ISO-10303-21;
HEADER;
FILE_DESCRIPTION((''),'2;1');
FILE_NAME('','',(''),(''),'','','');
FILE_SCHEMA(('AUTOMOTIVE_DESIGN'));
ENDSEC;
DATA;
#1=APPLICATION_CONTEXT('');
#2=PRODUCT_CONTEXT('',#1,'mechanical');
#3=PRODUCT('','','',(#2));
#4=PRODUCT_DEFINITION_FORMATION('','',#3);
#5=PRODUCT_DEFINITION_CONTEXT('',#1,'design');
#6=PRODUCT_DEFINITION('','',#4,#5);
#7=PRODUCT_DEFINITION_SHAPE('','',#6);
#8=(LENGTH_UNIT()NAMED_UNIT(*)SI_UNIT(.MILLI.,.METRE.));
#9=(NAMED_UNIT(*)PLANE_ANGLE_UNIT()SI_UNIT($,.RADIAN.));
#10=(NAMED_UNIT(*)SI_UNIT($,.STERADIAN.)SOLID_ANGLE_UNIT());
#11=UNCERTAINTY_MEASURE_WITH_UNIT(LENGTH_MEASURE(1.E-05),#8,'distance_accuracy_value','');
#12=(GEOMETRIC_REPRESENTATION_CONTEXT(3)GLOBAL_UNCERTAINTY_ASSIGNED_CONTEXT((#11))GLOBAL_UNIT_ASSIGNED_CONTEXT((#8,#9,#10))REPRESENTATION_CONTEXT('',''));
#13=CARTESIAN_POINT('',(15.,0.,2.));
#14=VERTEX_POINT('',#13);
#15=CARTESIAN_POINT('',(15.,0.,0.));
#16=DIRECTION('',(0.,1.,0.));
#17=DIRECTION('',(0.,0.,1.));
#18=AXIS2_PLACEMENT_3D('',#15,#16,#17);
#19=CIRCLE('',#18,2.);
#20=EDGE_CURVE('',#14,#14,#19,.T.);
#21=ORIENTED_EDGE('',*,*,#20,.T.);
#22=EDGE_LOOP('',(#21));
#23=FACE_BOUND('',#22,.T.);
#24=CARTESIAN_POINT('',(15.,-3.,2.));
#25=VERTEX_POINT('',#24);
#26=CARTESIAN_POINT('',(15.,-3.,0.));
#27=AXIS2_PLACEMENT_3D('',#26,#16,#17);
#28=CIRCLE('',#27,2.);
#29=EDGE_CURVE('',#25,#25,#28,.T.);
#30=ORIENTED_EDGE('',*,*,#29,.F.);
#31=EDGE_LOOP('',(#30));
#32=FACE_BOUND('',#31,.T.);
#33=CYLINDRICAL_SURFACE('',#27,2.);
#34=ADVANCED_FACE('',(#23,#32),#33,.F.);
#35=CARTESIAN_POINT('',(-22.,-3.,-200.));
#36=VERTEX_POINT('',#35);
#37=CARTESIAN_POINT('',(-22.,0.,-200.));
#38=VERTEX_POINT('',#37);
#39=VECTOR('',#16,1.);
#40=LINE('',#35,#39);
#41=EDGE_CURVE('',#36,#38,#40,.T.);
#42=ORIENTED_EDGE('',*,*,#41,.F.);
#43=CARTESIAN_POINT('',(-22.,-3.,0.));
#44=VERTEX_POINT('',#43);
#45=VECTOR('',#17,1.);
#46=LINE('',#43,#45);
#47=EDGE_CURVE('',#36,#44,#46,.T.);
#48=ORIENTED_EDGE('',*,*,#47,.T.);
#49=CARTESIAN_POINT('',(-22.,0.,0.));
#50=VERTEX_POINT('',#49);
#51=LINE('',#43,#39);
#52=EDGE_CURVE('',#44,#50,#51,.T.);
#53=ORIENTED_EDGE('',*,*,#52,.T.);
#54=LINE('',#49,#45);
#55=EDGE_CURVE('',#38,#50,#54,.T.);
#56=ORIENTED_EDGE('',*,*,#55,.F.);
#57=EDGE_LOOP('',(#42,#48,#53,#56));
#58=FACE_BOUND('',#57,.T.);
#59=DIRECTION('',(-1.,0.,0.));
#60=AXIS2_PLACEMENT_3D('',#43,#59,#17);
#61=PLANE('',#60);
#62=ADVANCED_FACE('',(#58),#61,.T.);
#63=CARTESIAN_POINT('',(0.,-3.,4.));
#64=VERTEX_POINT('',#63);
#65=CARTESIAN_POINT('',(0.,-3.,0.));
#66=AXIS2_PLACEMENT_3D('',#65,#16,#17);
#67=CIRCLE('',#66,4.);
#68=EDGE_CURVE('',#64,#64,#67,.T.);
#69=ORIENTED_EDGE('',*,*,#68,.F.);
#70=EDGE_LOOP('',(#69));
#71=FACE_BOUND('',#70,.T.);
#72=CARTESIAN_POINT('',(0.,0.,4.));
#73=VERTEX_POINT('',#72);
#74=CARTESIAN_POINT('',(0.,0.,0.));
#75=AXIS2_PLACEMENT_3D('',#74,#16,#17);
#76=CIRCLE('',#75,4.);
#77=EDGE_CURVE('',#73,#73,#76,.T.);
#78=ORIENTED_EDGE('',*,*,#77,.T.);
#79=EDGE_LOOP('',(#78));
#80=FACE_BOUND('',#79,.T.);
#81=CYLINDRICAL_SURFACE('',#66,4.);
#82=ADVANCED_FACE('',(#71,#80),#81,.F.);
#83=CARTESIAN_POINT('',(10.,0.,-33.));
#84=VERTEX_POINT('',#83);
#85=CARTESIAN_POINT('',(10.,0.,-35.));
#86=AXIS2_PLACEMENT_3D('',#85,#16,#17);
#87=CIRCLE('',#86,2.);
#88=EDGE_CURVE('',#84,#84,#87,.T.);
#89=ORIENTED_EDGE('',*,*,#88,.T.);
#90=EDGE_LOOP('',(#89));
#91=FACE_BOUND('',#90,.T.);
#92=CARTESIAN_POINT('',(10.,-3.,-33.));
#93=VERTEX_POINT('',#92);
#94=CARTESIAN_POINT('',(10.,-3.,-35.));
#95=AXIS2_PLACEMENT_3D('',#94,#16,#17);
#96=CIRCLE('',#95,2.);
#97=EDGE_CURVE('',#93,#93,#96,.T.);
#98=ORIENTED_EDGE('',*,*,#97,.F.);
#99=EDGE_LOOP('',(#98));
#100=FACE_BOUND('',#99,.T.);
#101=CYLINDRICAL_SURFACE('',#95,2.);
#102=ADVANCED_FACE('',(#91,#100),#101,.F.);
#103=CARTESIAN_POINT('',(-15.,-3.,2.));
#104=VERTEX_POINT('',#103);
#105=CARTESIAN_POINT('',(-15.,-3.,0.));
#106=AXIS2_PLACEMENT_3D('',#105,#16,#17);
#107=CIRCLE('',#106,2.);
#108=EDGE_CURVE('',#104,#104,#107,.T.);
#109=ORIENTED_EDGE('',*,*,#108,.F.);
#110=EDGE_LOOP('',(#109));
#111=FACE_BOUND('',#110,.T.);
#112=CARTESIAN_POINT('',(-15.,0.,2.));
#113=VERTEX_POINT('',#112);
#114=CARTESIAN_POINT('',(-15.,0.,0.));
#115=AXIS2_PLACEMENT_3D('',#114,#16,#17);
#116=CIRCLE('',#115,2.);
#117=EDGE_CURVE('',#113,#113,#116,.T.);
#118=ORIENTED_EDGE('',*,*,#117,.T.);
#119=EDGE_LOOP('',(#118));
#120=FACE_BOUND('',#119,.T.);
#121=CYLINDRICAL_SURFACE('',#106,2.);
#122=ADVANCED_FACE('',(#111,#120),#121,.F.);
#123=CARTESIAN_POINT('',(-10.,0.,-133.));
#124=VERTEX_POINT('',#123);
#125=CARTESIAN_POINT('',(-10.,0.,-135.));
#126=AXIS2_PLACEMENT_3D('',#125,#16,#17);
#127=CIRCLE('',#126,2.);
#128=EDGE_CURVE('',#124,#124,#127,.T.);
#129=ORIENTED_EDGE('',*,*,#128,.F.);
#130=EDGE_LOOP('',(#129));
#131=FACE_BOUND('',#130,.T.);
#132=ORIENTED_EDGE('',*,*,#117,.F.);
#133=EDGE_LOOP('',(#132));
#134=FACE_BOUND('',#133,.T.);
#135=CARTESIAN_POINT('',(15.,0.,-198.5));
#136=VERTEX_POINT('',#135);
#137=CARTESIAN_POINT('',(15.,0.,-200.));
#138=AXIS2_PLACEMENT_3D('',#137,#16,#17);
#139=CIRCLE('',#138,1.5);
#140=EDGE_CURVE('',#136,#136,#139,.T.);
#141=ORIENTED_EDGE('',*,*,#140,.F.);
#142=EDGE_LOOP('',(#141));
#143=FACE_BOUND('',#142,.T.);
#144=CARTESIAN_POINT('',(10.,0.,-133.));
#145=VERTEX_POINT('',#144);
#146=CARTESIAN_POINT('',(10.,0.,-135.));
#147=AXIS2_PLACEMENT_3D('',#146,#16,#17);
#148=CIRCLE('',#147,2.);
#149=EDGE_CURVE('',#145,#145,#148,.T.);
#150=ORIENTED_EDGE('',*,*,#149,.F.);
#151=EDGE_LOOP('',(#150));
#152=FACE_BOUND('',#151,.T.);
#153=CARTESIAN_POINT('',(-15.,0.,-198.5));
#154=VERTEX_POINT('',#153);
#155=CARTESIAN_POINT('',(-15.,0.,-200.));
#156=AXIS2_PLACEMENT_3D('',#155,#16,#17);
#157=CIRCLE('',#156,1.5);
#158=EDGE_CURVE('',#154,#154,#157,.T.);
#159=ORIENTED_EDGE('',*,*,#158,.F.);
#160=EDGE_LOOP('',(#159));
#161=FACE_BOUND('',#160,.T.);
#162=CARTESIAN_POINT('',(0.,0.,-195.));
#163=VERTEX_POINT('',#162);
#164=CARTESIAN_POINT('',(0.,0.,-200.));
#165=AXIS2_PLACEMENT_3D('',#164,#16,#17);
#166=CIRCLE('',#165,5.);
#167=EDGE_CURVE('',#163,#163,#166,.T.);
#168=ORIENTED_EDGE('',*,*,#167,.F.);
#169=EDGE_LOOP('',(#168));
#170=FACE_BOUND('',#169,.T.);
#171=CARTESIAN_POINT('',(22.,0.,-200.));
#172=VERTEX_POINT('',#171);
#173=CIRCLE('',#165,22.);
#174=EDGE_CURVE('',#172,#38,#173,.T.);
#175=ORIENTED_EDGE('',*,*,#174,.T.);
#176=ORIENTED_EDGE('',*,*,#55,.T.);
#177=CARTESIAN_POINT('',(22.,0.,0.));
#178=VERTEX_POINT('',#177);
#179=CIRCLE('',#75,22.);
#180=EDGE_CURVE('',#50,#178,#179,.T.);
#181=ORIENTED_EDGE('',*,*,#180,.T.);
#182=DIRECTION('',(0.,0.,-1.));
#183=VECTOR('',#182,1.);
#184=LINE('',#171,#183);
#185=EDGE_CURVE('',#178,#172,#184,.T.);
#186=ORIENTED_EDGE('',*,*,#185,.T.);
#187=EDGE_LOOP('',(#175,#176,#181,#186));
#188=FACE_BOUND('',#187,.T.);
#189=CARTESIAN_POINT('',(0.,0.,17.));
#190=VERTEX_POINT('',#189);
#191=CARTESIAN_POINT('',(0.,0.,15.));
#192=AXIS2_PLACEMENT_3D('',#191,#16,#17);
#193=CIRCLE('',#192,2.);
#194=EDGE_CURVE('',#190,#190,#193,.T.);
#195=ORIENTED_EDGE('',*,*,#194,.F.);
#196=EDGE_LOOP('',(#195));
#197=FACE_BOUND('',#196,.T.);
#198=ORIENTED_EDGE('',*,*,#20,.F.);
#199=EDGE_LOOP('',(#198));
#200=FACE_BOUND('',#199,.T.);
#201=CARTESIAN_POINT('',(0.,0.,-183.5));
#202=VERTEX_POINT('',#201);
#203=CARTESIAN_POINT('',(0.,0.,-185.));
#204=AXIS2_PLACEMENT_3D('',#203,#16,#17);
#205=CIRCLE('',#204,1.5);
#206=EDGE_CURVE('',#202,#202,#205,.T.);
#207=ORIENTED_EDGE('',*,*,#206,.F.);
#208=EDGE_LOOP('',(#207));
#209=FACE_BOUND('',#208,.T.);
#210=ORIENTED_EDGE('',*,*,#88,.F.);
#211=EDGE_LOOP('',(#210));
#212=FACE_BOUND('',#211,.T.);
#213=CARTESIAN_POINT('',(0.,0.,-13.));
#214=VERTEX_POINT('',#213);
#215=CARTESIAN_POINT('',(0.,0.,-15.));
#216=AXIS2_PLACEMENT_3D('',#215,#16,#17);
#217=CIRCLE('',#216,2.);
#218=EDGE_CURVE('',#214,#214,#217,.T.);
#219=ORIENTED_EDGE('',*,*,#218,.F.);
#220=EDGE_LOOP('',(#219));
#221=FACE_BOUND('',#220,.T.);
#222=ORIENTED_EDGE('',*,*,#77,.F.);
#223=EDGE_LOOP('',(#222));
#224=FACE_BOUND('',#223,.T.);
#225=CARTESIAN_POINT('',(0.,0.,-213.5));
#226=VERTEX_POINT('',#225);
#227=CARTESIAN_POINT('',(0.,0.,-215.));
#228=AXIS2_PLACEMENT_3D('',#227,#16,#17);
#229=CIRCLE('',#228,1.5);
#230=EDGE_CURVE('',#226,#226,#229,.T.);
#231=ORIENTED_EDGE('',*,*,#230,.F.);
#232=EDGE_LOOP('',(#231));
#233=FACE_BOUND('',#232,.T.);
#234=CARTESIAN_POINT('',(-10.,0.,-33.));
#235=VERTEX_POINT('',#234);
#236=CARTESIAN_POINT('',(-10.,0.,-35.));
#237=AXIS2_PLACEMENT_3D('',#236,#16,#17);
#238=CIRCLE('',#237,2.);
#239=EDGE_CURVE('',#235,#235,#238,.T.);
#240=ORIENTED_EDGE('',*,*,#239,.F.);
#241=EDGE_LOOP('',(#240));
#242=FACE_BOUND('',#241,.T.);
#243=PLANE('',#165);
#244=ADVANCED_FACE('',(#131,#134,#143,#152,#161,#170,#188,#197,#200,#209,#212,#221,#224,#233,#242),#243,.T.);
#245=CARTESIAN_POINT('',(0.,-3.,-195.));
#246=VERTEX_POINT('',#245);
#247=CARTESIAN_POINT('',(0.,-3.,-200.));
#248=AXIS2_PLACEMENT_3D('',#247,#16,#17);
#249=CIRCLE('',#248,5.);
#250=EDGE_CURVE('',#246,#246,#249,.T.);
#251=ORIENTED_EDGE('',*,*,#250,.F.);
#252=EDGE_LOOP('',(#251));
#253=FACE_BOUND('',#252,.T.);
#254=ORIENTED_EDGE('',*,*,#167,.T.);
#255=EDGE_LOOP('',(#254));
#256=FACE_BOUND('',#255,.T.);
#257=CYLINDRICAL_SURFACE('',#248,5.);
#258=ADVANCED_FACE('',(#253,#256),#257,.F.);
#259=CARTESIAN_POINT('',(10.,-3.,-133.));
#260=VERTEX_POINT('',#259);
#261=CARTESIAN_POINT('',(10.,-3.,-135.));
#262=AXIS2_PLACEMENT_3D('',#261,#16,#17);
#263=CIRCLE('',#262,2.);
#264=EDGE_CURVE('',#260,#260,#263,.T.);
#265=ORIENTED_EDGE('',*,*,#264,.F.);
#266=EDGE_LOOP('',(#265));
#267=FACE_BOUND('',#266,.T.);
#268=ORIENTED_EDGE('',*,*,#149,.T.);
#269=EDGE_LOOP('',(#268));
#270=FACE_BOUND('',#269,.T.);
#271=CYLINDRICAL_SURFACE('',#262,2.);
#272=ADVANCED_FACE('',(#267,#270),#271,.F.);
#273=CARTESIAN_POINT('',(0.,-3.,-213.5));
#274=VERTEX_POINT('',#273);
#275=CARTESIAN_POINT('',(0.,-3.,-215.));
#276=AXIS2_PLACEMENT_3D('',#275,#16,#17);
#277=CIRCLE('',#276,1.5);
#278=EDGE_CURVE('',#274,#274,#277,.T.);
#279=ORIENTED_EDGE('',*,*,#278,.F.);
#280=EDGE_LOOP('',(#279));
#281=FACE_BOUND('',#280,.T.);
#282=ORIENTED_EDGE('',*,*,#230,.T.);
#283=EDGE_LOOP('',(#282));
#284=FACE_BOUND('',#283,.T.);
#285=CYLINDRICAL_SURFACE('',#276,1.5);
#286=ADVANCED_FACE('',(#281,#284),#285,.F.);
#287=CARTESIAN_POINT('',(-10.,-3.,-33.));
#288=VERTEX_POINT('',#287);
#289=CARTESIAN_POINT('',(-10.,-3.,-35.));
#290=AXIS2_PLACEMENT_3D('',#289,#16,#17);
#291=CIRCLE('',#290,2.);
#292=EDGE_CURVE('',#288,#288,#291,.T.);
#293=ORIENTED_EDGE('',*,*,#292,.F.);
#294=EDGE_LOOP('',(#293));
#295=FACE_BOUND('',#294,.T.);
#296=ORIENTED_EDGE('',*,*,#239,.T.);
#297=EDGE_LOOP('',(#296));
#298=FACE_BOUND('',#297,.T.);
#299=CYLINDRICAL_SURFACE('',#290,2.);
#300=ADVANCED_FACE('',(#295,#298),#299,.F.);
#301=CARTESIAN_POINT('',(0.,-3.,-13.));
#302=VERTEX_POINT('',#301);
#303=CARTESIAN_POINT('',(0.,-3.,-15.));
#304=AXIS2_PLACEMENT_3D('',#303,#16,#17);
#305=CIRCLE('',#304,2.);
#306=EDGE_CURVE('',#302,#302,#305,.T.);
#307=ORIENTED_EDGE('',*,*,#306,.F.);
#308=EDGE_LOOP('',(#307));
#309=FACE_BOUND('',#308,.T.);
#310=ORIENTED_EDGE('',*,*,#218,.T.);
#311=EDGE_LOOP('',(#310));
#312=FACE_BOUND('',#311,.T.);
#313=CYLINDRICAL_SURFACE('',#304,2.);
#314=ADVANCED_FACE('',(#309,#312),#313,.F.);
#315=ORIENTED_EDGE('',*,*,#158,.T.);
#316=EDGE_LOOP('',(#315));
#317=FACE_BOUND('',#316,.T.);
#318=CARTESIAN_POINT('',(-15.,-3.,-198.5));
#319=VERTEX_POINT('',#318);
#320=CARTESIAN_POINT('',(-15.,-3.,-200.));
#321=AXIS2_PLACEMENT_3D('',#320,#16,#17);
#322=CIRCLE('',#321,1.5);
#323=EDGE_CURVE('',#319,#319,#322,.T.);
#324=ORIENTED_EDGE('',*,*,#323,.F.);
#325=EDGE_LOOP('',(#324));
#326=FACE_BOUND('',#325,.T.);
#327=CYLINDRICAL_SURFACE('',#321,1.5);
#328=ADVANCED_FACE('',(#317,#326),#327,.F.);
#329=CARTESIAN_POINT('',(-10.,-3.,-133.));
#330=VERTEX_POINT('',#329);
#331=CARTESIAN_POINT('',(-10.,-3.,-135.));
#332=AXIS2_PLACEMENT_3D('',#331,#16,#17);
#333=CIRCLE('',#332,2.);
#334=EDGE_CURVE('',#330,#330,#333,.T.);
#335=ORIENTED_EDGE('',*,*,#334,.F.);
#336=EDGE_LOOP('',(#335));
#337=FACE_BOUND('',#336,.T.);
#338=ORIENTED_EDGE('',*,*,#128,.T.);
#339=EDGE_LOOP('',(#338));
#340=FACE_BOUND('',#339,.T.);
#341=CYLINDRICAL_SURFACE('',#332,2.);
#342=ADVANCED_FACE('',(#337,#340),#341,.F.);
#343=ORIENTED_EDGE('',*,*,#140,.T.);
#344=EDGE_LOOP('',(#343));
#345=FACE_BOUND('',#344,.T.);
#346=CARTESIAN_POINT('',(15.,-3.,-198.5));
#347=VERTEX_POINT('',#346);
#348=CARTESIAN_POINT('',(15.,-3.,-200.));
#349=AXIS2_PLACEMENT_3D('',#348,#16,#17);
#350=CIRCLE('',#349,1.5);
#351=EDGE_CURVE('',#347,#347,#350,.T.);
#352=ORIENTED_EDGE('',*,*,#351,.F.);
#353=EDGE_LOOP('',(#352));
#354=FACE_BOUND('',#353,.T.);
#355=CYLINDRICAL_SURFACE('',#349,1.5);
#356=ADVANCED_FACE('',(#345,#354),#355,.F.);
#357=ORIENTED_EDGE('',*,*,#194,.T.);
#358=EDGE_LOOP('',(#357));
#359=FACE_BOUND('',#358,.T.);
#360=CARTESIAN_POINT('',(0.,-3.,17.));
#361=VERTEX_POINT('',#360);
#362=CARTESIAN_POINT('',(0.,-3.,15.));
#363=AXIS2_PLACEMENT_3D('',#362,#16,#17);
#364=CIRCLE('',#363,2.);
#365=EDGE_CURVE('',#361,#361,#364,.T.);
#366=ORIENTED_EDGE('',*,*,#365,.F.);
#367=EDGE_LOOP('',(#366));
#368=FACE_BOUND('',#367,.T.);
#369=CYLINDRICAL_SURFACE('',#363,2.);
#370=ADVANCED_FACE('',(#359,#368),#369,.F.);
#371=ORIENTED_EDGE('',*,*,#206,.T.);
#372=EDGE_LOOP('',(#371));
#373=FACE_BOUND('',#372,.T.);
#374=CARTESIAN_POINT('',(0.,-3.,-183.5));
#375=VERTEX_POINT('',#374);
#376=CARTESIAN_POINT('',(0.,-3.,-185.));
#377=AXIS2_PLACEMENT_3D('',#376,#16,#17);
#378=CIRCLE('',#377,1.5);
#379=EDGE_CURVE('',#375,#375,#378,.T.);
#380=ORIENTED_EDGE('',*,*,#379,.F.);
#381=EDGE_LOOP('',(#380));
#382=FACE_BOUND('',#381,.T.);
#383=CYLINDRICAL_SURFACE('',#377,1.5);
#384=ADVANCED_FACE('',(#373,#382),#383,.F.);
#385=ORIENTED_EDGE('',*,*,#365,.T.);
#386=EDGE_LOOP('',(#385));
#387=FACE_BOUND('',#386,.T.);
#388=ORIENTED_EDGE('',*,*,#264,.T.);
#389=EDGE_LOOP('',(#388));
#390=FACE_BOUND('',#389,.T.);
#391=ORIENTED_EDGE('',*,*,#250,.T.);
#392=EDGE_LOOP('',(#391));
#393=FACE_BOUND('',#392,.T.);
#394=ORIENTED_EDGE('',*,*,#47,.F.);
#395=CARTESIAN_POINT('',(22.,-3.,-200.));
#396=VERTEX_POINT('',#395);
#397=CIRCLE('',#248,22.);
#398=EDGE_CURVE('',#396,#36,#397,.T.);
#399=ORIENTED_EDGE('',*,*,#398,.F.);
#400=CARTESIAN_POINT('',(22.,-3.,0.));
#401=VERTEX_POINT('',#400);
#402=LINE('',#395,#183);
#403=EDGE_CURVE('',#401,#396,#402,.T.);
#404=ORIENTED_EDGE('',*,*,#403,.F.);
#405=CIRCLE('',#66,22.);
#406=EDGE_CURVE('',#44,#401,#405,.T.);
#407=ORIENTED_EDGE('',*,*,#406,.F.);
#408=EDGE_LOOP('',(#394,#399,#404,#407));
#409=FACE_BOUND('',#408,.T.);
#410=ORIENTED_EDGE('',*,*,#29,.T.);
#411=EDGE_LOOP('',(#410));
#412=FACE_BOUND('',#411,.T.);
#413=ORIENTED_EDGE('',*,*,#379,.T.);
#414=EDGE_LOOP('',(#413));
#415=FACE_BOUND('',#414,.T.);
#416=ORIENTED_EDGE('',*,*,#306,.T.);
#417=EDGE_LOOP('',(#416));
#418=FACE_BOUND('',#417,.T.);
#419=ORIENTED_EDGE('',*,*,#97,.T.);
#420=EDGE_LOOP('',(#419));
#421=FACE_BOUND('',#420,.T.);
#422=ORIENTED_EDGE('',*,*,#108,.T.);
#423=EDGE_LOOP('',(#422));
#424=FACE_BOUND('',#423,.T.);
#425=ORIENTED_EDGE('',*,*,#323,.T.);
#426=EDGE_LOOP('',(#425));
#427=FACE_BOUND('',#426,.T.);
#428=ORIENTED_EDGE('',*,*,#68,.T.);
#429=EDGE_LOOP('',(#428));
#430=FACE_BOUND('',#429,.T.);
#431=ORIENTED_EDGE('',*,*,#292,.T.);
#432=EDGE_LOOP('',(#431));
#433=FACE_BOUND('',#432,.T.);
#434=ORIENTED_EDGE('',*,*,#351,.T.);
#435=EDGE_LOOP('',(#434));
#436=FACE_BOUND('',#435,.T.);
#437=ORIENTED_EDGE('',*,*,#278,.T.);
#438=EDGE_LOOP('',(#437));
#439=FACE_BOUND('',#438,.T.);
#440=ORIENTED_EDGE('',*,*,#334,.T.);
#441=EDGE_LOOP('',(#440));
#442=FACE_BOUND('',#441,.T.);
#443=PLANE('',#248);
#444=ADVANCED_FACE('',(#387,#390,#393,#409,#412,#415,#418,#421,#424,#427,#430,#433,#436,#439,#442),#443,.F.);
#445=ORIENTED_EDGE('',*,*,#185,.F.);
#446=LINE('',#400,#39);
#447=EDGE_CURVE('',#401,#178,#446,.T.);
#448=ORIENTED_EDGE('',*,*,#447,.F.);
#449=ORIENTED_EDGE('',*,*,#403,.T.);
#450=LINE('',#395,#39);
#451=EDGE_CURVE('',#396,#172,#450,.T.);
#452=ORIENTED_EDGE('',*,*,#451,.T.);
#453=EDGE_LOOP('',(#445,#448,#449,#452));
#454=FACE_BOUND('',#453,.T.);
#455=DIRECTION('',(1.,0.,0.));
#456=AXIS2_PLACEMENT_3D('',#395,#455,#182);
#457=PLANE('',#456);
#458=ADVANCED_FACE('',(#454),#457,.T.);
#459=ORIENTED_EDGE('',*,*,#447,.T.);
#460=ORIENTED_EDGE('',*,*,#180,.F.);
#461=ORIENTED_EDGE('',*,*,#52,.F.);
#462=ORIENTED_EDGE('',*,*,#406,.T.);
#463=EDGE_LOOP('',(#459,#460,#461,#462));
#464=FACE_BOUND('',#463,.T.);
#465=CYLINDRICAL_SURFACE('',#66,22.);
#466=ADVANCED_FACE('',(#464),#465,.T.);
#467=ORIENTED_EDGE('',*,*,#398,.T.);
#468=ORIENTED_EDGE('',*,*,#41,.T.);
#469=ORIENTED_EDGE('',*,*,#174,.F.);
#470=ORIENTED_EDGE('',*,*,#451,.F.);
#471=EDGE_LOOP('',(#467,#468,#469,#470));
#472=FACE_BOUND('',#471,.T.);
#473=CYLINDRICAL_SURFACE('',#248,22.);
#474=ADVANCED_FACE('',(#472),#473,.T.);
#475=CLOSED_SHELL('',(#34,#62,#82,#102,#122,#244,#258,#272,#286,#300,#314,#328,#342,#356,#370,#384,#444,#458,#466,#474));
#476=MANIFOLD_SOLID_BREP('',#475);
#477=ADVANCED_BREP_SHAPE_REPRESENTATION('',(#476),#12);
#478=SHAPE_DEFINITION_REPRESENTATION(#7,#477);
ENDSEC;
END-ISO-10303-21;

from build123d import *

# Parameters (mm, degrees)
SKETCH_1_R             = 4
SKETCH_1_R_2           = 2
SKETCH_1_R_3           = 5
SKETCH_1_R_4           = 1.5
SM_BASE_FLANGE_1_DEPTH = 3


# Sheet-metal steps are written as plain solids
with BuildPart() as part:
    # Sketch 1 → 基体-法兰1 (new body)
    with BuildSketch(Plane(origin=(0, 0, 0), x_dir=(1, 0, 0), z_dir=(0, 1, 0))):
        with BuildLine():
            Line((22, 200), (22, 0))
            ThreePointArc((22, 0), (0, -22), (-22, 0))
            Line((-22, 0), (-22, 200))
            ThreePointArc((-22, 200), (0, 222), (22, 200))
        make_face()
        with Locations(Location((0, 0, 0), (0, 0, 270))):
            Circle(SKETCH_1_R, mode=Mode.SUBTRACT)
        with Locations(Location((-10, 35, 0), (0, 0, 270))):
            Circle(SKETCH_1_R_2, mode=Mode.SUBTRACT)
        with Locations(Location((10, 35, 0), (0, 0, 270))):
            Circle(SKETCH_1_R_2, mode=Mode.SUBTRACT)
        with Locations(Location((-10, 135, 0), (0, 0, 270))):
            Circle(SKETCH_1_R_2, mode=Mode.SUBTRACT)
        with Locations(Location((10, 135, 0), (0, 0, 270))):
            Circle(SKETCH_1_R_2, mode=Mode.SUBTRACT)
        with Locations(Location((0, 200, 0), (0, 0, 270))):
            Circle(SKETCH_1_R_3, mode=Mode.SUBTRACT)
        with Locations(Location((0, 215, 0), (0, 0, 270))):
            Circle(SKETCH_1_R_4, mode=Mode.SUBTRACT)
        with Locations(Location((15, 200, 0), (0, 0, 270))):
            Circle(SKETCH_1_R_4, mode=Mode.SUBTRACT)
        with Locations(Location((0, 185, 0), (0, 0, 270))):
            Circle(SKETCH_1_R_4, mode=Mode.SUBTRACT)
        with Locations(Location((-15, 200, 0), (0, 0, 270))):
            Circle(SKETCH_1_R_4, mode=Mode.SUBTRACT)
        with Locations(Location((0, 15, 0), (0, 0, 270))):
            Circle(SKETCH_1_R_2, mode=Mode.SUBTRACT)
        with Locations(Location((15, 0, 0), (0, 0, 270))):
            Circle(SKETCH_1_R_2, mode=Mode.SUBTRACT)
        with Locations(Location((0, -15, 0), (0, 0, 270))):
            Circle(SKETCH_1_R_2, mode=Mode.SUBTRACT)
        with Locations(Location((-15, 0, 0), (0, 0, 270))):
            Circle(SKETCH_1_R_2, mode=Mode.SUBTRACT)
    extrude(amount=-SM_BASE_FLANGE_1_DEPTH)


solid = part.part
